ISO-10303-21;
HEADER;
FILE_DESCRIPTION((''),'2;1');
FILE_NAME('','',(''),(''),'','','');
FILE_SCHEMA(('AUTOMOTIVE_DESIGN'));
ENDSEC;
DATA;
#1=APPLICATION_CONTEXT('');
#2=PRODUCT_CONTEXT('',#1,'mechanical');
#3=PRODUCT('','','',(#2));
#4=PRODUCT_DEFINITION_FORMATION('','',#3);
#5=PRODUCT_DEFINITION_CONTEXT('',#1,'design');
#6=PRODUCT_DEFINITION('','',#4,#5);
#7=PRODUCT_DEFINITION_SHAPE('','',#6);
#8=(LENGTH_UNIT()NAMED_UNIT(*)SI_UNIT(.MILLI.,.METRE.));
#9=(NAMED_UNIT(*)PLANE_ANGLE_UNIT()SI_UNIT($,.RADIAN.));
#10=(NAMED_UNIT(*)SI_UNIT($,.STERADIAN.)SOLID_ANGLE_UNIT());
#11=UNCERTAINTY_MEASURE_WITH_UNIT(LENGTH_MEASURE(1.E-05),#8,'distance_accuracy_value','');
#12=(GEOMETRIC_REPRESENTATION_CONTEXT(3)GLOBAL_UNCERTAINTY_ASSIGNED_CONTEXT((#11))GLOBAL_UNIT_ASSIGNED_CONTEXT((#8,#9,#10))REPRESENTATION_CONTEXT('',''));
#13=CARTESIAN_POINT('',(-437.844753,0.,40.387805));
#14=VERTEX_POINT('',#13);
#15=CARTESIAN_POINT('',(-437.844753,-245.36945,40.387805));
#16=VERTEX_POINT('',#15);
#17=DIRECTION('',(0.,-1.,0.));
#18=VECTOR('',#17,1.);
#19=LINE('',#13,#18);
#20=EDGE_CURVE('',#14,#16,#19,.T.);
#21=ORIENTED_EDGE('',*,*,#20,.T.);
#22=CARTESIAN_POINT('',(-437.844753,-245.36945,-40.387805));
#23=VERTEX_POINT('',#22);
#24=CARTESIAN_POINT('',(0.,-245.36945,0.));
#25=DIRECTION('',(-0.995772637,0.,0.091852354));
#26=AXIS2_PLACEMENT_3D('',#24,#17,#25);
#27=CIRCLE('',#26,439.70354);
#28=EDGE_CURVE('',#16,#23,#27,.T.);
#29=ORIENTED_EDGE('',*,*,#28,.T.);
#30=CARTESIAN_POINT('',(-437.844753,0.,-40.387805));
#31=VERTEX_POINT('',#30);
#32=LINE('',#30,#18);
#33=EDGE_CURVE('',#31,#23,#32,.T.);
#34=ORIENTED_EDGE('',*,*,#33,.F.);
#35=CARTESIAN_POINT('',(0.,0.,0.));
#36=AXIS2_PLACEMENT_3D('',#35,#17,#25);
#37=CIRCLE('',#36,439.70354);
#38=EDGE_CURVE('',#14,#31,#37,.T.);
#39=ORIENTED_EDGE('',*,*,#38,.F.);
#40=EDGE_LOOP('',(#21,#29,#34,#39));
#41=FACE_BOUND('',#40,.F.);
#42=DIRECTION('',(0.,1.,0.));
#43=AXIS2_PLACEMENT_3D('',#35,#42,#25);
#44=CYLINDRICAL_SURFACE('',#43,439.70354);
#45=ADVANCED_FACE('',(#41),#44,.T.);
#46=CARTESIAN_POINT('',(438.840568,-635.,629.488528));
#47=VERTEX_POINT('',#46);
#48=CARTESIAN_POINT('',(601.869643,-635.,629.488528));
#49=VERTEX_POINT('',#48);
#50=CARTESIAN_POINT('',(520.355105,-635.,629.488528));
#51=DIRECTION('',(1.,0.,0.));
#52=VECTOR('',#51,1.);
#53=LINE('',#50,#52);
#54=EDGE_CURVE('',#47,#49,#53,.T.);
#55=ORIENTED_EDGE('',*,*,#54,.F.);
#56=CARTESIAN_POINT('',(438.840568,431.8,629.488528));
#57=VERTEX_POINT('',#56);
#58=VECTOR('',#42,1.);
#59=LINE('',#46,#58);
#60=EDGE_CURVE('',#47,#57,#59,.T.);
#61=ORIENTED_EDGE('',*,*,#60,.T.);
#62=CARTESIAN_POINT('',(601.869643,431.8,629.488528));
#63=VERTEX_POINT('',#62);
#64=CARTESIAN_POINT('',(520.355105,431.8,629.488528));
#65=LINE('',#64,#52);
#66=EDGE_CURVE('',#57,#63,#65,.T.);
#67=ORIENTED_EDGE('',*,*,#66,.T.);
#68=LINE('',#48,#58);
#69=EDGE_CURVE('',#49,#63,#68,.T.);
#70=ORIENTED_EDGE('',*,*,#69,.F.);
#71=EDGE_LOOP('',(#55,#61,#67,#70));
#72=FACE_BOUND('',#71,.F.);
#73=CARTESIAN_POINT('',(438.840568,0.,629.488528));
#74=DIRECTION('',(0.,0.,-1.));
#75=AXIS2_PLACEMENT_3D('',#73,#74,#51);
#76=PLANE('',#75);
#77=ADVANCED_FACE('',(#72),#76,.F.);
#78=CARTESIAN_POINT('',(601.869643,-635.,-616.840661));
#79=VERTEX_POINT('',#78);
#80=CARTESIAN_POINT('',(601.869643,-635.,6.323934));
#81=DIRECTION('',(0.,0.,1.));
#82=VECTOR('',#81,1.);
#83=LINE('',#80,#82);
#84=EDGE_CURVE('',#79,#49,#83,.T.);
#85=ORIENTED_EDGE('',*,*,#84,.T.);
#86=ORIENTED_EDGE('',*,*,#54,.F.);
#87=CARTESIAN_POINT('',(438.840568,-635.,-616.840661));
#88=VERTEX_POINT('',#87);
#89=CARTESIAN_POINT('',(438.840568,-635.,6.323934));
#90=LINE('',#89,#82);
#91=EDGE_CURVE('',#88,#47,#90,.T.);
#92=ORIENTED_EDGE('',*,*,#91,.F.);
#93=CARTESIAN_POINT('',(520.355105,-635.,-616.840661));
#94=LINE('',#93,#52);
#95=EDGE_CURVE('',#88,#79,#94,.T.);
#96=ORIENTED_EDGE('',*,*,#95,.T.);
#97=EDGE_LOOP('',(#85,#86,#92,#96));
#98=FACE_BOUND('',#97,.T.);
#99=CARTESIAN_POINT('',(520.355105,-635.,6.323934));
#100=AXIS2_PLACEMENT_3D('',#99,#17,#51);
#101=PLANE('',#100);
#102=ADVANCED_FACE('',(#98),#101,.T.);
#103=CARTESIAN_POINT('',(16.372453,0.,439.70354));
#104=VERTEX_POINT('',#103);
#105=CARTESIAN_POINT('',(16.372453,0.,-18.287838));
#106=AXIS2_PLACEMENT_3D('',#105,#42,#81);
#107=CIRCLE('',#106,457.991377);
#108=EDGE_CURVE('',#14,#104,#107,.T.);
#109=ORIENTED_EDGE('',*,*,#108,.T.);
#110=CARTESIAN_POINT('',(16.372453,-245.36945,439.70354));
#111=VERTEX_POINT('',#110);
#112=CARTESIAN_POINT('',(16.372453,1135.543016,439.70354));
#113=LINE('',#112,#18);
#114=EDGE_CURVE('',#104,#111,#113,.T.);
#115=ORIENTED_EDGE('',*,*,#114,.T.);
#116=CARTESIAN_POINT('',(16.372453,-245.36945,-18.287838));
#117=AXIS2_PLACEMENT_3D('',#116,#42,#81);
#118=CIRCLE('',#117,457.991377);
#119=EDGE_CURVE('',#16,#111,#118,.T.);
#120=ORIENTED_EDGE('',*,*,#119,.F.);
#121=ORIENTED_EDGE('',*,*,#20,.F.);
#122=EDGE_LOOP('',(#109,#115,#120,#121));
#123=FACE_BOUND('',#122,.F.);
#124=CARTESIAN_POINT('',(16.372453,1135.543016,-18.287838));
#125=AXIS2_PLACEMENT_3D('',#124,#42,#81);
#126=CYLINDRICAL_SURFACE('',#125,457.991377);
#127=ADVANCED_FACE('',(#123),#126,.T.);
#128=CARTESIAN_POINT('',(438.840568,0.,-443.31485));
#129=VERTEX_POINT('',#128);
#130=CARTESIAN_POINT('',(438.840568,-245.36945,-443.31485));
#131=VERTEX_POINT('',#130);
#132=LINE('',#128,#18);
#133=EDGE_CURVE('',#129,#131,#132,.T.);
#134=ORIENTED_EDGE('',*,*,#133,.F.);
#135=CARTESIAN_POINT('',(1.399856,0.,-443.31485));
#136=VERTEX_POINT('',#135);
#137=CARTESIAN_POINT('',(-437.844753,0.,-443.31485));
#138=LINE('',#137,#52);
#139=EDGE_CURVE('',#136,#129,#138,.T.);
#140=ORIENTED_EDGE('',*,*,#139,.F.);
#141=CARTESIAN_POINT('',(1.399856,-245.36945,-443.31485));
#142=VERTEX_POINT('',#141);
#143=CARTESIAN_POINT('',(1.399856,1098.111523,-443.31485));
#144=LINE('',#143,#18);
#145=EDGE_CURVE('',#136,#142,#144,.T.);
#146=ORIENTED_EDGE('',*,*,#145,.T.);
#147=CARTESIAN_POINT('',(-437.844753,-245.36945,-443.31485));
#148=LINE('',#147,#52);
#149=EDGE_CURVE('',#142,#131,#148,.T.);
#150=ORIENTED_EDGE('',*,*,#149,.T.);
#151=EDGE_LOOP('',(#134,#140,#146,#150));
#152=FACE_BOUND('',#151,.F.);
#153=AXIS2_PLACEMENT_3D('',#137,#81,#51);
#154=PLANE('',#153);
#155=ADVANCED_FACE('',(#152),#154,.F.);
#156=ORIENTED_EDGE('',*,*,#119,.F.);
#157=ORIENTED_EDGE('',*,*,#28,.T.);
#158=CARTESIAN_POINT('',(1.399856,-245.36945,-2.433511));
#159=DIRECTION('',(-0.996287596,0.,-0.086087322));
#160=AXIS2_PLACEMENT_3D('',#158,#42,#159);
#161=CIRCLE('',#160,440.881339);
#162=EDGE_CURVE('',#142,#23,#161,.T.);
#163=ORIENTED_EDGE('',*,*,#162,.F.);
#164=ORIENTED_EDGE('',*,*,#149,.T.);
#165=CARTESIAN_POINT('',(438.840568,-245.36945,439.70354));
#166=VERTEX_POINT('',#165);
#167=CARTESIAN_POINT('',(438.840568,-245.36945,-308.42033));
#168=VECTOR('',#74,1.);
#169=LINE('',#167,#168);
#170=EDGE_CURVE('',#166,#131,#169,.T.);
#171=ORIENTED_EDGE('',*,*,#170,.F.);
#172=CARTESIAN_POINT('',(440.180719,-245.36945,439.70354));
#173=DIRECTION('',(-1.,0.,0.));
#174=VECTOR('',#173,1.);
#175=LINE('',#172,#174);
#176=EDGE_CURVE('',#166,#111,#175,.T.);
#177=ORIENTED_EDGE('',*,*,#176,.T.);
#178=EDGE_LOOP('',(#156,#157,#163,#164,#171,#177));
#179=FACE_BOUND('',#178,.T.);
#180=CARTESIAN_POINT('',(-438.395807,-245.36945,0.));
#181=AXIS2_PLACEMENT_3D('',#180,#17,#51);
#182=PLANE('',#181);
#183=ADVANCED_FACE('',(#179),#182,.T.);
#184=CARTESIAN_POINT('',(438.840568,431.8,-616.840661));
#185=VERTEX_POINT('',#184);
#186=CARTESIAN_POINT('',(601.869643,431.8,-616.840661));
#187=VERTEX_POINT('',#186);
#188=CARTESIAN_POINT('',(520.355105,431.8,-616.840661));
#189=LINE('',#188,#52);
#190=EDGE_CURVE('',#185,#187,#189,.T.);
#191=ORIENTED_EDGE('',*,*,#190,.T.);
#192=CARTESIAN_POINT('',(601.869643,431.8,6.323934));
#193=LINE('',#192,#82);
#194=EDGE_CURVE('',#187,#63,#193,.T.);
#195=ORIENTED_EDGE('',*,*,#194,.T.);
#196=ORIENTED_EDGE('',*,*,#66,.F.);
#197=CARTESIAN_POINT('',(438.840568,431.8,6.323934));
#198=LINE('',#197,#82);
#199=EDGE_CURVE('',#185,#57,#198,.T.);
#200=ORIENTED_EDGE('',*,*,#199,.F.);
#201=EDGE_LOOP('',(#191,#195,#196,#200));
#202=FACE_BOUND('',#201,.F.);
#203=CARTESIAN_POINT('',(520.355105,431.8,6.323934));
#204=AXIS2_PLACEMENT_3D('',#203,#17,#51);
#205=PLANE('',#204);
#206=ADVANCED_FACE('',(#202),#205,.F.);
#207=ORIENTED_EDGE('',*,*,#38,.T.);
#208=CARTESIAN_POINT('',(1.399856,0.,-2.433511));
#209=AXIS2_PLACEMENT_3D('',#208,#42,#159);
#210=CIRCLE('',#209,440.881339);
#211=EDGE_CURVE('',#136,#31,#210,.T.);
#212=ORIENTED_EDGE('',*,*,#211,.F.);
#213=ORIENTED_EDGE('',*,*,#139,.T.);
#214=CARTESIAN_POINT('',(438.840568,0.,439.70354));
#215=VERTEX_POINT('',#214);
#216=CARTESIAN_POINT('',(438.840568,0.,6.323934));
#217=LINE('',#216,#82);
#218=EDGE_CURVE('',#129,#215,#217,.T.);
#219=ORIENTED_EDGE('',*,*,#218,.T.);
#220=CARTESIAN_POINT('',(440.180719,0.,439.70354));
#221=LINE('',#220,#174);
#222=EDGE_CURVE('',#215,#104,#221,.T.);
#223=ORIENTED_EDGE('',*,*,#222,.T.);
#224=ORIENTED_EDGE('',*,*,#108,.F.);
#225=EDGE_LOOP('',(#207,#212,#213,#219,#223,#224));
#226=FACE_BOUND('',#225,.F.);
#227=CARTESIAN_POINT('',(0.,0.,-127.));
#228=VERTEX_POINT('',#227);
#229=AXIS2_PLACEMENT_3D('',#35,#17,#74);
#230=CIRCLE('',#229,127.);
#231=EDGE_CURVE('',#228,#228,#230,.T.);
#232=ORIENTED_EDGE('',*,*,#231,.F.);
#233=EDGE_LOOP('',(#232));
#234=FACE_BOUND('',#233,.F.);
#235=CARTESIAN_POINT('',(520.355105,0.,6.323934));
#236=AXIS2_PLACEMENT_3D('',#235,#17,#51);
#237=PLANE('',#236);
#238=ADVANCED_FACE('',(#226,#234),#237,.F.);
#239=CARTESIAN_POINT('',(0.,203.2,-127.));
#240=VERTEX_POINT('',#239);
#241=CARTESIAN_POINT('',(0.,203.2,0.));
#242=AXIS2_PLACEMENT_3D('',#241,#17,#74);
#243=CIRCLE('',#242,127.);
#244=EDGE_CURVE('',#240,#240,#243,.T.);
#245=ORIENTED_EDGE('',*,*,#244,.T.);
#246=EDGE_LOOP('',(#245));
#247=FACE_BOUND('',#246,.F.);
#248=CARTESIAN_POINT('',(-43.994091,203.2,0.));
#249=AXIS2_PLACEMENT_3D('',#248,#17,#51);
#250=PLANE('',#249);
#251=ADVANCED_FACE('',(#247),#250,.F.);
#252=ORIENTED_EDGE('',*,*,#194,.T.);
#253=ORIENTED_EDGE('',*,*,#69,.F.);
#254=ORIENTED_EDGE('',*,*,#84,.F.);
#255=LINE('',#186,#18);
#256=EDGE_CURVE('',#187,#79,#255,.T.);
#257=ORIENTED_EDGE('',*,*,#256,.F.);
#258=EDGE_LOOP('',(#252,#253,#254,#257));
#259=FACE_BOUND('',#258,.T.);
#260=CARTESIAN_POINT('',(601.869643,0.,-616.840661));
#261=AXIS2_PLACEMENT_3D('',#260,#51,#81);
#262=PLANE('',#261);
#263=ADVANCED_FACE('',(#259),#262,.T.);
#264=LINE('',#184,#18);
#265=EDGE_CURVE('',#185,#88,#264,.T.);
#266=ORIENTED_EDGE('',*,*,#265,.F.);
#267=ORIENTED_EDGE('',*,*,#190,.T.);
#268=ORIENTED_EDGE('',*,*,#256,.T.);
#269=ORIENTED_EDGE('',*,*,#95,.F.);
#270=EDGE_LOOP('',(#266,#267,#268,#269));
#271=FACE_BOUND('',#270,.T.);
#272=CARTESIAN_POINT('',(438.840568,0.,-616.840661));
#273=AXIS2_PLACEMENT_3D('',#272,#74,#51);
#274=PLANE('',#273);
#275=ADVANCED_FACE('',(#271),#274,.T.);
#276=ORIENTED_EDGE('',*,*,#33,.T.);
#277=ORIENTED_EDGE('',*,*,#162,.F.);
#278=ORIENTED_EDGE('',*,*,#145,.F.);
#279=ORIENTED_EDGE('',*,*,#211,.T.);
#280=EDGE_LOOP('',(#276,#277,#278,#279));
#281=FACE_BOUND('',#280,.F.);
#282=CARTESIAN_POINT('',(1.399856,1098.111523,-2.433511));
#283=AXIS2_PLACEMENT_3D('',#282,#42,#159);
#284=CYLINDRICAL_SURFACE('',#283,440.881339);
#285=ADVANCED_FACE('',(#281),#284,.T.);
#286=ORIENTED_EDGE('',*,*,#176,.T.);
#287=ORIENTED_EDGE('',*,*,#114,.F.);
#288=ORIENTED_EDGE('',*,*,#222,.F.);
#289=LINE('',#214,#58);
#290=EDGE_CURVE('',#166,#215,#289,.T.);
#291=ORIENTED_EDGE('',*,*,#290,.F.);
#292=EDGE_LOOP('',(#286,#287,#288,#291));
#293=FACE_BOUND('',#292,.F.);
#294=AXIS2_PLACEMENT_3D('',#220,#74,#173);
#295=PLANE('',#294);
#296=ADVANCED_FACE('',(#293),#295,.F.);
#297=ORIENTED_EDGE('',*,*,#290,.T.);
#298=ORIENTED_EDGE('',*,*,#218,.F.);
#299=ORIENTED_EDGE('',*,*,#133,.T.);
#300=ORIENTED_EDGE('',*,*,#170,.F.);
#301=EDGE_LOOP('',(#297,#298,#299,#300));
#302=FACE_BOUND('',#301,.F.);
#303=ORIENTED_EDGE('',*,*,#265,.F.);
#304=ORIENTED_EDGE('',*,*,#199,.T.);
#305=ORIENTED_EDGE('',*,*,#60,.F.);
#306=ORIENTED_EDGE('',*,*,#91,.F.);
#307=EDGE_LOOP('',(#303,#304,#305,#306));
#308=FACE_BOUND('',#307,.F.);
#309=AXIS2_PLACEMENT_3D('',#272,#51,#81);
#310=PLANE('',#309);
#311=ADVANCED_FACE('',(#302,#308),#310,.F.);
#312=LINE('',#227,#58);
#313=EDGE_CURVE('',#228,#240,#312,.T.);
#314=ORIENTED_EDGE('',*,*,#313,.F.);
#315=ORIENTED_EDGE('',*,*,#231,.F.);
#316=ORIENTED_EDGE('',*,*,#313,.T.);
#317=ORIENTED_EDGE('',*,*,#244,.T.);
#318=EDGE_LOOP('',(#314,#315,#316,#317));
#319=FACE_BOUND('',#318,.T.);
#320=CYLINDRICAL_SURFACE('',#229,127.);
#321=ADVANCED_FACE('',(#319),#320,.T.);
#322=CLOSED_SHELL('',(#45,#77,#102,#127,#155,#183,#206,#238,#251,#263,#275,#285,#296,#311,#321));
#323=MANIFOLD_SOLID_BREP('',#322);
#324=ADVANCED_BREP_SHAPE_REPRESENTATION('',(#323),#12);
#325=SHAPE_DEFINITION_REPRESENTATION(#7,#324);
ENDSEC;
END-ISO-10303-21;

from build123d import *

# Parameters (mm, degrees)
F1_DEPTH    = 245.36945
F2_DEPTH    = 203.2
F3_W        = 163.0290746689
F3_H        = 1246.3291883469
F4_DEPTH    = 635
F5_DEPTH    = 431.8
F6_T1_DEPTH = 2516.4554829813
F7_T1_DEPTH = 2441.5924956103


# Not quite as in the source:
# - a fillet or chamfer that OpenCascade refuses, or shapes differently, is made with other operations: its cross-section is extruded or revolved along the edge and cut away or added


with BuildPart() as f1:
    # F0 (on Front) → F1 (new body)
    with BuildSketch(Plane.XZ):
        with BuildLine():
            Line((-437.8447532654, -40.3878050825), (-437.8447532654, 40.3878050825))
            ThreePointArc((-437.8447532654, 40.3878050825), (-439.703539628, 0), (-437.8447532654, -40.3878050825))
        make_face()
        with BuildLine():
            Line((-437.8447532654, 439.703539628), (-437.8447532654, 40.3878050825))
            Line((-437.8447532654, 40.3878050825), (-437.8447532654, -40.3878050825))
            Line((-437.8447532654, -40.3878050825), (-437.8447532654, -443.3148503304))
            Line((-437.8447532654, -443.3148503304), (0, -443.3148503304))
            Line((0, -443.3148503304), (0, -127))
            ThreePointArc((0, -127), (-127, 0), (0, 127))
            Line((0, 127), (0, 439.703539628))
            Line((0, 439.703539628), (-437.8447532654, 439.703539628))
        make_face()
        with BuildLine():
            Line((440.1807188988, 439.703539628), (0, 439.703539628))
            Line((0, 439.703539628), (0, 127))
            ThreePointArc((0, 127), (89.8025612107, 89.8025612107), (127, 0))
            ThreePointArc((127, 0), (89.8025612107, -89.8025612107), (0, -127))
            Line((0, -127), (0, -443.3148503304))
            Line((0, -443.3148503304), (440.1807188988, -443.3148503304))
            Line((440.1807188988, -443.3148503304), (440.1807188988, 439.703539628))
        make_face()
        with BuildLine():
            Line((0, -127), (0, 127))
            ThreePointArc((0, 127), (-127, 0), (0, -127))
        make_face()
        with BuildLine():
            ThreePointArc((127, 0), (89.8025612107, 89.8025612107), (0, 127))
            Line((0, 127), (0, -127))
            ThreePointArc((0, -127), (89.8025612107, -89.8025612107), (127, 0))
        make_face()
    extrude(amount=F1_DEPTH)

    # F0 (on Front) → F2 (join)
    with BuildSketch(Plane.XZ):
        with BuildLine():
            Line((0, -127), (0, 127))
            ThreePointArc((0, 127), (-127, 0), (0, -127))
        make_face()
        with BuildLine():
            ThreePointArc((127, 0), (89.8025612107, 89.8025612107), (0, 127))
            Line((0, 127), (0, -127))
            ThreePointArc((0, -127), (89.8025612107, -89.8025612107), (127, 0))
        make_face()
    extrude(amount=-F2_DEPTH)

    # F3 (on Front) → F4 (join)
    with BuildSketch(Plane.XZ):
        with Locations((520.3551054001, 6.3239336014)):
            Rectangle(F3_W, F3_H)
    extrude(amount=F4_DEPTH)

    # F3 (on Front) → F5 (join)
    with BuildSketch(Plane.XZ):
        with Locations((520.3551054001, 6.3239336014)):
            Rectangle(F3_W, F3_H)
    extrude(amount=-F5_DEPTH)

    # F6: fillet of radius 457.9913774748 on 1 edges, made by hand

    # F6_s2 → F6_t1 (cut)
    with BuildSketch(Plane.XZ.offset(-1135.5430164906)):
        with BuildLine():
            ThreePointArc((16.3724533309, 439.703539628), (-286.0206379525, 325.6809400755), (-437.8447532654, 40.3878050825))
            Line((-437.8447532654, 40.3878050825), (-437.8447532654, 439.703539628))
            Line((-437.8447532654, 439.703539628), (16.3724533309, 439.703539628))
        make_face()
    extrude(amount=F6_T1_DEPTH, mode=Mode.SUBTRACT)

    # F7: fillet of radius 440.8813389734 on 1 edges, made by hand

    # F7_s2 → F7_t1 (cut)
    with BuildSketch(Plane.XZ.offset(-1098.1115228051)):
        with BuildLine():
            ThreePointArc((-437.8447532654, -40.3878050825), (-296.6295178781, -327.3255664249), (1.3998558567, -443.3148503304))
            Line((1.3998558567, -443.3148503304), (-437.8447532654, -443.3148503304))
            Line((-437.8447532654, -443.3148503304), (-437.8447532654, -40.3878050825))
        make_face()
    extrude(amount=F7_T1_DEPTH, mode=Mode.SUBTRACT)


solid = f1.part
